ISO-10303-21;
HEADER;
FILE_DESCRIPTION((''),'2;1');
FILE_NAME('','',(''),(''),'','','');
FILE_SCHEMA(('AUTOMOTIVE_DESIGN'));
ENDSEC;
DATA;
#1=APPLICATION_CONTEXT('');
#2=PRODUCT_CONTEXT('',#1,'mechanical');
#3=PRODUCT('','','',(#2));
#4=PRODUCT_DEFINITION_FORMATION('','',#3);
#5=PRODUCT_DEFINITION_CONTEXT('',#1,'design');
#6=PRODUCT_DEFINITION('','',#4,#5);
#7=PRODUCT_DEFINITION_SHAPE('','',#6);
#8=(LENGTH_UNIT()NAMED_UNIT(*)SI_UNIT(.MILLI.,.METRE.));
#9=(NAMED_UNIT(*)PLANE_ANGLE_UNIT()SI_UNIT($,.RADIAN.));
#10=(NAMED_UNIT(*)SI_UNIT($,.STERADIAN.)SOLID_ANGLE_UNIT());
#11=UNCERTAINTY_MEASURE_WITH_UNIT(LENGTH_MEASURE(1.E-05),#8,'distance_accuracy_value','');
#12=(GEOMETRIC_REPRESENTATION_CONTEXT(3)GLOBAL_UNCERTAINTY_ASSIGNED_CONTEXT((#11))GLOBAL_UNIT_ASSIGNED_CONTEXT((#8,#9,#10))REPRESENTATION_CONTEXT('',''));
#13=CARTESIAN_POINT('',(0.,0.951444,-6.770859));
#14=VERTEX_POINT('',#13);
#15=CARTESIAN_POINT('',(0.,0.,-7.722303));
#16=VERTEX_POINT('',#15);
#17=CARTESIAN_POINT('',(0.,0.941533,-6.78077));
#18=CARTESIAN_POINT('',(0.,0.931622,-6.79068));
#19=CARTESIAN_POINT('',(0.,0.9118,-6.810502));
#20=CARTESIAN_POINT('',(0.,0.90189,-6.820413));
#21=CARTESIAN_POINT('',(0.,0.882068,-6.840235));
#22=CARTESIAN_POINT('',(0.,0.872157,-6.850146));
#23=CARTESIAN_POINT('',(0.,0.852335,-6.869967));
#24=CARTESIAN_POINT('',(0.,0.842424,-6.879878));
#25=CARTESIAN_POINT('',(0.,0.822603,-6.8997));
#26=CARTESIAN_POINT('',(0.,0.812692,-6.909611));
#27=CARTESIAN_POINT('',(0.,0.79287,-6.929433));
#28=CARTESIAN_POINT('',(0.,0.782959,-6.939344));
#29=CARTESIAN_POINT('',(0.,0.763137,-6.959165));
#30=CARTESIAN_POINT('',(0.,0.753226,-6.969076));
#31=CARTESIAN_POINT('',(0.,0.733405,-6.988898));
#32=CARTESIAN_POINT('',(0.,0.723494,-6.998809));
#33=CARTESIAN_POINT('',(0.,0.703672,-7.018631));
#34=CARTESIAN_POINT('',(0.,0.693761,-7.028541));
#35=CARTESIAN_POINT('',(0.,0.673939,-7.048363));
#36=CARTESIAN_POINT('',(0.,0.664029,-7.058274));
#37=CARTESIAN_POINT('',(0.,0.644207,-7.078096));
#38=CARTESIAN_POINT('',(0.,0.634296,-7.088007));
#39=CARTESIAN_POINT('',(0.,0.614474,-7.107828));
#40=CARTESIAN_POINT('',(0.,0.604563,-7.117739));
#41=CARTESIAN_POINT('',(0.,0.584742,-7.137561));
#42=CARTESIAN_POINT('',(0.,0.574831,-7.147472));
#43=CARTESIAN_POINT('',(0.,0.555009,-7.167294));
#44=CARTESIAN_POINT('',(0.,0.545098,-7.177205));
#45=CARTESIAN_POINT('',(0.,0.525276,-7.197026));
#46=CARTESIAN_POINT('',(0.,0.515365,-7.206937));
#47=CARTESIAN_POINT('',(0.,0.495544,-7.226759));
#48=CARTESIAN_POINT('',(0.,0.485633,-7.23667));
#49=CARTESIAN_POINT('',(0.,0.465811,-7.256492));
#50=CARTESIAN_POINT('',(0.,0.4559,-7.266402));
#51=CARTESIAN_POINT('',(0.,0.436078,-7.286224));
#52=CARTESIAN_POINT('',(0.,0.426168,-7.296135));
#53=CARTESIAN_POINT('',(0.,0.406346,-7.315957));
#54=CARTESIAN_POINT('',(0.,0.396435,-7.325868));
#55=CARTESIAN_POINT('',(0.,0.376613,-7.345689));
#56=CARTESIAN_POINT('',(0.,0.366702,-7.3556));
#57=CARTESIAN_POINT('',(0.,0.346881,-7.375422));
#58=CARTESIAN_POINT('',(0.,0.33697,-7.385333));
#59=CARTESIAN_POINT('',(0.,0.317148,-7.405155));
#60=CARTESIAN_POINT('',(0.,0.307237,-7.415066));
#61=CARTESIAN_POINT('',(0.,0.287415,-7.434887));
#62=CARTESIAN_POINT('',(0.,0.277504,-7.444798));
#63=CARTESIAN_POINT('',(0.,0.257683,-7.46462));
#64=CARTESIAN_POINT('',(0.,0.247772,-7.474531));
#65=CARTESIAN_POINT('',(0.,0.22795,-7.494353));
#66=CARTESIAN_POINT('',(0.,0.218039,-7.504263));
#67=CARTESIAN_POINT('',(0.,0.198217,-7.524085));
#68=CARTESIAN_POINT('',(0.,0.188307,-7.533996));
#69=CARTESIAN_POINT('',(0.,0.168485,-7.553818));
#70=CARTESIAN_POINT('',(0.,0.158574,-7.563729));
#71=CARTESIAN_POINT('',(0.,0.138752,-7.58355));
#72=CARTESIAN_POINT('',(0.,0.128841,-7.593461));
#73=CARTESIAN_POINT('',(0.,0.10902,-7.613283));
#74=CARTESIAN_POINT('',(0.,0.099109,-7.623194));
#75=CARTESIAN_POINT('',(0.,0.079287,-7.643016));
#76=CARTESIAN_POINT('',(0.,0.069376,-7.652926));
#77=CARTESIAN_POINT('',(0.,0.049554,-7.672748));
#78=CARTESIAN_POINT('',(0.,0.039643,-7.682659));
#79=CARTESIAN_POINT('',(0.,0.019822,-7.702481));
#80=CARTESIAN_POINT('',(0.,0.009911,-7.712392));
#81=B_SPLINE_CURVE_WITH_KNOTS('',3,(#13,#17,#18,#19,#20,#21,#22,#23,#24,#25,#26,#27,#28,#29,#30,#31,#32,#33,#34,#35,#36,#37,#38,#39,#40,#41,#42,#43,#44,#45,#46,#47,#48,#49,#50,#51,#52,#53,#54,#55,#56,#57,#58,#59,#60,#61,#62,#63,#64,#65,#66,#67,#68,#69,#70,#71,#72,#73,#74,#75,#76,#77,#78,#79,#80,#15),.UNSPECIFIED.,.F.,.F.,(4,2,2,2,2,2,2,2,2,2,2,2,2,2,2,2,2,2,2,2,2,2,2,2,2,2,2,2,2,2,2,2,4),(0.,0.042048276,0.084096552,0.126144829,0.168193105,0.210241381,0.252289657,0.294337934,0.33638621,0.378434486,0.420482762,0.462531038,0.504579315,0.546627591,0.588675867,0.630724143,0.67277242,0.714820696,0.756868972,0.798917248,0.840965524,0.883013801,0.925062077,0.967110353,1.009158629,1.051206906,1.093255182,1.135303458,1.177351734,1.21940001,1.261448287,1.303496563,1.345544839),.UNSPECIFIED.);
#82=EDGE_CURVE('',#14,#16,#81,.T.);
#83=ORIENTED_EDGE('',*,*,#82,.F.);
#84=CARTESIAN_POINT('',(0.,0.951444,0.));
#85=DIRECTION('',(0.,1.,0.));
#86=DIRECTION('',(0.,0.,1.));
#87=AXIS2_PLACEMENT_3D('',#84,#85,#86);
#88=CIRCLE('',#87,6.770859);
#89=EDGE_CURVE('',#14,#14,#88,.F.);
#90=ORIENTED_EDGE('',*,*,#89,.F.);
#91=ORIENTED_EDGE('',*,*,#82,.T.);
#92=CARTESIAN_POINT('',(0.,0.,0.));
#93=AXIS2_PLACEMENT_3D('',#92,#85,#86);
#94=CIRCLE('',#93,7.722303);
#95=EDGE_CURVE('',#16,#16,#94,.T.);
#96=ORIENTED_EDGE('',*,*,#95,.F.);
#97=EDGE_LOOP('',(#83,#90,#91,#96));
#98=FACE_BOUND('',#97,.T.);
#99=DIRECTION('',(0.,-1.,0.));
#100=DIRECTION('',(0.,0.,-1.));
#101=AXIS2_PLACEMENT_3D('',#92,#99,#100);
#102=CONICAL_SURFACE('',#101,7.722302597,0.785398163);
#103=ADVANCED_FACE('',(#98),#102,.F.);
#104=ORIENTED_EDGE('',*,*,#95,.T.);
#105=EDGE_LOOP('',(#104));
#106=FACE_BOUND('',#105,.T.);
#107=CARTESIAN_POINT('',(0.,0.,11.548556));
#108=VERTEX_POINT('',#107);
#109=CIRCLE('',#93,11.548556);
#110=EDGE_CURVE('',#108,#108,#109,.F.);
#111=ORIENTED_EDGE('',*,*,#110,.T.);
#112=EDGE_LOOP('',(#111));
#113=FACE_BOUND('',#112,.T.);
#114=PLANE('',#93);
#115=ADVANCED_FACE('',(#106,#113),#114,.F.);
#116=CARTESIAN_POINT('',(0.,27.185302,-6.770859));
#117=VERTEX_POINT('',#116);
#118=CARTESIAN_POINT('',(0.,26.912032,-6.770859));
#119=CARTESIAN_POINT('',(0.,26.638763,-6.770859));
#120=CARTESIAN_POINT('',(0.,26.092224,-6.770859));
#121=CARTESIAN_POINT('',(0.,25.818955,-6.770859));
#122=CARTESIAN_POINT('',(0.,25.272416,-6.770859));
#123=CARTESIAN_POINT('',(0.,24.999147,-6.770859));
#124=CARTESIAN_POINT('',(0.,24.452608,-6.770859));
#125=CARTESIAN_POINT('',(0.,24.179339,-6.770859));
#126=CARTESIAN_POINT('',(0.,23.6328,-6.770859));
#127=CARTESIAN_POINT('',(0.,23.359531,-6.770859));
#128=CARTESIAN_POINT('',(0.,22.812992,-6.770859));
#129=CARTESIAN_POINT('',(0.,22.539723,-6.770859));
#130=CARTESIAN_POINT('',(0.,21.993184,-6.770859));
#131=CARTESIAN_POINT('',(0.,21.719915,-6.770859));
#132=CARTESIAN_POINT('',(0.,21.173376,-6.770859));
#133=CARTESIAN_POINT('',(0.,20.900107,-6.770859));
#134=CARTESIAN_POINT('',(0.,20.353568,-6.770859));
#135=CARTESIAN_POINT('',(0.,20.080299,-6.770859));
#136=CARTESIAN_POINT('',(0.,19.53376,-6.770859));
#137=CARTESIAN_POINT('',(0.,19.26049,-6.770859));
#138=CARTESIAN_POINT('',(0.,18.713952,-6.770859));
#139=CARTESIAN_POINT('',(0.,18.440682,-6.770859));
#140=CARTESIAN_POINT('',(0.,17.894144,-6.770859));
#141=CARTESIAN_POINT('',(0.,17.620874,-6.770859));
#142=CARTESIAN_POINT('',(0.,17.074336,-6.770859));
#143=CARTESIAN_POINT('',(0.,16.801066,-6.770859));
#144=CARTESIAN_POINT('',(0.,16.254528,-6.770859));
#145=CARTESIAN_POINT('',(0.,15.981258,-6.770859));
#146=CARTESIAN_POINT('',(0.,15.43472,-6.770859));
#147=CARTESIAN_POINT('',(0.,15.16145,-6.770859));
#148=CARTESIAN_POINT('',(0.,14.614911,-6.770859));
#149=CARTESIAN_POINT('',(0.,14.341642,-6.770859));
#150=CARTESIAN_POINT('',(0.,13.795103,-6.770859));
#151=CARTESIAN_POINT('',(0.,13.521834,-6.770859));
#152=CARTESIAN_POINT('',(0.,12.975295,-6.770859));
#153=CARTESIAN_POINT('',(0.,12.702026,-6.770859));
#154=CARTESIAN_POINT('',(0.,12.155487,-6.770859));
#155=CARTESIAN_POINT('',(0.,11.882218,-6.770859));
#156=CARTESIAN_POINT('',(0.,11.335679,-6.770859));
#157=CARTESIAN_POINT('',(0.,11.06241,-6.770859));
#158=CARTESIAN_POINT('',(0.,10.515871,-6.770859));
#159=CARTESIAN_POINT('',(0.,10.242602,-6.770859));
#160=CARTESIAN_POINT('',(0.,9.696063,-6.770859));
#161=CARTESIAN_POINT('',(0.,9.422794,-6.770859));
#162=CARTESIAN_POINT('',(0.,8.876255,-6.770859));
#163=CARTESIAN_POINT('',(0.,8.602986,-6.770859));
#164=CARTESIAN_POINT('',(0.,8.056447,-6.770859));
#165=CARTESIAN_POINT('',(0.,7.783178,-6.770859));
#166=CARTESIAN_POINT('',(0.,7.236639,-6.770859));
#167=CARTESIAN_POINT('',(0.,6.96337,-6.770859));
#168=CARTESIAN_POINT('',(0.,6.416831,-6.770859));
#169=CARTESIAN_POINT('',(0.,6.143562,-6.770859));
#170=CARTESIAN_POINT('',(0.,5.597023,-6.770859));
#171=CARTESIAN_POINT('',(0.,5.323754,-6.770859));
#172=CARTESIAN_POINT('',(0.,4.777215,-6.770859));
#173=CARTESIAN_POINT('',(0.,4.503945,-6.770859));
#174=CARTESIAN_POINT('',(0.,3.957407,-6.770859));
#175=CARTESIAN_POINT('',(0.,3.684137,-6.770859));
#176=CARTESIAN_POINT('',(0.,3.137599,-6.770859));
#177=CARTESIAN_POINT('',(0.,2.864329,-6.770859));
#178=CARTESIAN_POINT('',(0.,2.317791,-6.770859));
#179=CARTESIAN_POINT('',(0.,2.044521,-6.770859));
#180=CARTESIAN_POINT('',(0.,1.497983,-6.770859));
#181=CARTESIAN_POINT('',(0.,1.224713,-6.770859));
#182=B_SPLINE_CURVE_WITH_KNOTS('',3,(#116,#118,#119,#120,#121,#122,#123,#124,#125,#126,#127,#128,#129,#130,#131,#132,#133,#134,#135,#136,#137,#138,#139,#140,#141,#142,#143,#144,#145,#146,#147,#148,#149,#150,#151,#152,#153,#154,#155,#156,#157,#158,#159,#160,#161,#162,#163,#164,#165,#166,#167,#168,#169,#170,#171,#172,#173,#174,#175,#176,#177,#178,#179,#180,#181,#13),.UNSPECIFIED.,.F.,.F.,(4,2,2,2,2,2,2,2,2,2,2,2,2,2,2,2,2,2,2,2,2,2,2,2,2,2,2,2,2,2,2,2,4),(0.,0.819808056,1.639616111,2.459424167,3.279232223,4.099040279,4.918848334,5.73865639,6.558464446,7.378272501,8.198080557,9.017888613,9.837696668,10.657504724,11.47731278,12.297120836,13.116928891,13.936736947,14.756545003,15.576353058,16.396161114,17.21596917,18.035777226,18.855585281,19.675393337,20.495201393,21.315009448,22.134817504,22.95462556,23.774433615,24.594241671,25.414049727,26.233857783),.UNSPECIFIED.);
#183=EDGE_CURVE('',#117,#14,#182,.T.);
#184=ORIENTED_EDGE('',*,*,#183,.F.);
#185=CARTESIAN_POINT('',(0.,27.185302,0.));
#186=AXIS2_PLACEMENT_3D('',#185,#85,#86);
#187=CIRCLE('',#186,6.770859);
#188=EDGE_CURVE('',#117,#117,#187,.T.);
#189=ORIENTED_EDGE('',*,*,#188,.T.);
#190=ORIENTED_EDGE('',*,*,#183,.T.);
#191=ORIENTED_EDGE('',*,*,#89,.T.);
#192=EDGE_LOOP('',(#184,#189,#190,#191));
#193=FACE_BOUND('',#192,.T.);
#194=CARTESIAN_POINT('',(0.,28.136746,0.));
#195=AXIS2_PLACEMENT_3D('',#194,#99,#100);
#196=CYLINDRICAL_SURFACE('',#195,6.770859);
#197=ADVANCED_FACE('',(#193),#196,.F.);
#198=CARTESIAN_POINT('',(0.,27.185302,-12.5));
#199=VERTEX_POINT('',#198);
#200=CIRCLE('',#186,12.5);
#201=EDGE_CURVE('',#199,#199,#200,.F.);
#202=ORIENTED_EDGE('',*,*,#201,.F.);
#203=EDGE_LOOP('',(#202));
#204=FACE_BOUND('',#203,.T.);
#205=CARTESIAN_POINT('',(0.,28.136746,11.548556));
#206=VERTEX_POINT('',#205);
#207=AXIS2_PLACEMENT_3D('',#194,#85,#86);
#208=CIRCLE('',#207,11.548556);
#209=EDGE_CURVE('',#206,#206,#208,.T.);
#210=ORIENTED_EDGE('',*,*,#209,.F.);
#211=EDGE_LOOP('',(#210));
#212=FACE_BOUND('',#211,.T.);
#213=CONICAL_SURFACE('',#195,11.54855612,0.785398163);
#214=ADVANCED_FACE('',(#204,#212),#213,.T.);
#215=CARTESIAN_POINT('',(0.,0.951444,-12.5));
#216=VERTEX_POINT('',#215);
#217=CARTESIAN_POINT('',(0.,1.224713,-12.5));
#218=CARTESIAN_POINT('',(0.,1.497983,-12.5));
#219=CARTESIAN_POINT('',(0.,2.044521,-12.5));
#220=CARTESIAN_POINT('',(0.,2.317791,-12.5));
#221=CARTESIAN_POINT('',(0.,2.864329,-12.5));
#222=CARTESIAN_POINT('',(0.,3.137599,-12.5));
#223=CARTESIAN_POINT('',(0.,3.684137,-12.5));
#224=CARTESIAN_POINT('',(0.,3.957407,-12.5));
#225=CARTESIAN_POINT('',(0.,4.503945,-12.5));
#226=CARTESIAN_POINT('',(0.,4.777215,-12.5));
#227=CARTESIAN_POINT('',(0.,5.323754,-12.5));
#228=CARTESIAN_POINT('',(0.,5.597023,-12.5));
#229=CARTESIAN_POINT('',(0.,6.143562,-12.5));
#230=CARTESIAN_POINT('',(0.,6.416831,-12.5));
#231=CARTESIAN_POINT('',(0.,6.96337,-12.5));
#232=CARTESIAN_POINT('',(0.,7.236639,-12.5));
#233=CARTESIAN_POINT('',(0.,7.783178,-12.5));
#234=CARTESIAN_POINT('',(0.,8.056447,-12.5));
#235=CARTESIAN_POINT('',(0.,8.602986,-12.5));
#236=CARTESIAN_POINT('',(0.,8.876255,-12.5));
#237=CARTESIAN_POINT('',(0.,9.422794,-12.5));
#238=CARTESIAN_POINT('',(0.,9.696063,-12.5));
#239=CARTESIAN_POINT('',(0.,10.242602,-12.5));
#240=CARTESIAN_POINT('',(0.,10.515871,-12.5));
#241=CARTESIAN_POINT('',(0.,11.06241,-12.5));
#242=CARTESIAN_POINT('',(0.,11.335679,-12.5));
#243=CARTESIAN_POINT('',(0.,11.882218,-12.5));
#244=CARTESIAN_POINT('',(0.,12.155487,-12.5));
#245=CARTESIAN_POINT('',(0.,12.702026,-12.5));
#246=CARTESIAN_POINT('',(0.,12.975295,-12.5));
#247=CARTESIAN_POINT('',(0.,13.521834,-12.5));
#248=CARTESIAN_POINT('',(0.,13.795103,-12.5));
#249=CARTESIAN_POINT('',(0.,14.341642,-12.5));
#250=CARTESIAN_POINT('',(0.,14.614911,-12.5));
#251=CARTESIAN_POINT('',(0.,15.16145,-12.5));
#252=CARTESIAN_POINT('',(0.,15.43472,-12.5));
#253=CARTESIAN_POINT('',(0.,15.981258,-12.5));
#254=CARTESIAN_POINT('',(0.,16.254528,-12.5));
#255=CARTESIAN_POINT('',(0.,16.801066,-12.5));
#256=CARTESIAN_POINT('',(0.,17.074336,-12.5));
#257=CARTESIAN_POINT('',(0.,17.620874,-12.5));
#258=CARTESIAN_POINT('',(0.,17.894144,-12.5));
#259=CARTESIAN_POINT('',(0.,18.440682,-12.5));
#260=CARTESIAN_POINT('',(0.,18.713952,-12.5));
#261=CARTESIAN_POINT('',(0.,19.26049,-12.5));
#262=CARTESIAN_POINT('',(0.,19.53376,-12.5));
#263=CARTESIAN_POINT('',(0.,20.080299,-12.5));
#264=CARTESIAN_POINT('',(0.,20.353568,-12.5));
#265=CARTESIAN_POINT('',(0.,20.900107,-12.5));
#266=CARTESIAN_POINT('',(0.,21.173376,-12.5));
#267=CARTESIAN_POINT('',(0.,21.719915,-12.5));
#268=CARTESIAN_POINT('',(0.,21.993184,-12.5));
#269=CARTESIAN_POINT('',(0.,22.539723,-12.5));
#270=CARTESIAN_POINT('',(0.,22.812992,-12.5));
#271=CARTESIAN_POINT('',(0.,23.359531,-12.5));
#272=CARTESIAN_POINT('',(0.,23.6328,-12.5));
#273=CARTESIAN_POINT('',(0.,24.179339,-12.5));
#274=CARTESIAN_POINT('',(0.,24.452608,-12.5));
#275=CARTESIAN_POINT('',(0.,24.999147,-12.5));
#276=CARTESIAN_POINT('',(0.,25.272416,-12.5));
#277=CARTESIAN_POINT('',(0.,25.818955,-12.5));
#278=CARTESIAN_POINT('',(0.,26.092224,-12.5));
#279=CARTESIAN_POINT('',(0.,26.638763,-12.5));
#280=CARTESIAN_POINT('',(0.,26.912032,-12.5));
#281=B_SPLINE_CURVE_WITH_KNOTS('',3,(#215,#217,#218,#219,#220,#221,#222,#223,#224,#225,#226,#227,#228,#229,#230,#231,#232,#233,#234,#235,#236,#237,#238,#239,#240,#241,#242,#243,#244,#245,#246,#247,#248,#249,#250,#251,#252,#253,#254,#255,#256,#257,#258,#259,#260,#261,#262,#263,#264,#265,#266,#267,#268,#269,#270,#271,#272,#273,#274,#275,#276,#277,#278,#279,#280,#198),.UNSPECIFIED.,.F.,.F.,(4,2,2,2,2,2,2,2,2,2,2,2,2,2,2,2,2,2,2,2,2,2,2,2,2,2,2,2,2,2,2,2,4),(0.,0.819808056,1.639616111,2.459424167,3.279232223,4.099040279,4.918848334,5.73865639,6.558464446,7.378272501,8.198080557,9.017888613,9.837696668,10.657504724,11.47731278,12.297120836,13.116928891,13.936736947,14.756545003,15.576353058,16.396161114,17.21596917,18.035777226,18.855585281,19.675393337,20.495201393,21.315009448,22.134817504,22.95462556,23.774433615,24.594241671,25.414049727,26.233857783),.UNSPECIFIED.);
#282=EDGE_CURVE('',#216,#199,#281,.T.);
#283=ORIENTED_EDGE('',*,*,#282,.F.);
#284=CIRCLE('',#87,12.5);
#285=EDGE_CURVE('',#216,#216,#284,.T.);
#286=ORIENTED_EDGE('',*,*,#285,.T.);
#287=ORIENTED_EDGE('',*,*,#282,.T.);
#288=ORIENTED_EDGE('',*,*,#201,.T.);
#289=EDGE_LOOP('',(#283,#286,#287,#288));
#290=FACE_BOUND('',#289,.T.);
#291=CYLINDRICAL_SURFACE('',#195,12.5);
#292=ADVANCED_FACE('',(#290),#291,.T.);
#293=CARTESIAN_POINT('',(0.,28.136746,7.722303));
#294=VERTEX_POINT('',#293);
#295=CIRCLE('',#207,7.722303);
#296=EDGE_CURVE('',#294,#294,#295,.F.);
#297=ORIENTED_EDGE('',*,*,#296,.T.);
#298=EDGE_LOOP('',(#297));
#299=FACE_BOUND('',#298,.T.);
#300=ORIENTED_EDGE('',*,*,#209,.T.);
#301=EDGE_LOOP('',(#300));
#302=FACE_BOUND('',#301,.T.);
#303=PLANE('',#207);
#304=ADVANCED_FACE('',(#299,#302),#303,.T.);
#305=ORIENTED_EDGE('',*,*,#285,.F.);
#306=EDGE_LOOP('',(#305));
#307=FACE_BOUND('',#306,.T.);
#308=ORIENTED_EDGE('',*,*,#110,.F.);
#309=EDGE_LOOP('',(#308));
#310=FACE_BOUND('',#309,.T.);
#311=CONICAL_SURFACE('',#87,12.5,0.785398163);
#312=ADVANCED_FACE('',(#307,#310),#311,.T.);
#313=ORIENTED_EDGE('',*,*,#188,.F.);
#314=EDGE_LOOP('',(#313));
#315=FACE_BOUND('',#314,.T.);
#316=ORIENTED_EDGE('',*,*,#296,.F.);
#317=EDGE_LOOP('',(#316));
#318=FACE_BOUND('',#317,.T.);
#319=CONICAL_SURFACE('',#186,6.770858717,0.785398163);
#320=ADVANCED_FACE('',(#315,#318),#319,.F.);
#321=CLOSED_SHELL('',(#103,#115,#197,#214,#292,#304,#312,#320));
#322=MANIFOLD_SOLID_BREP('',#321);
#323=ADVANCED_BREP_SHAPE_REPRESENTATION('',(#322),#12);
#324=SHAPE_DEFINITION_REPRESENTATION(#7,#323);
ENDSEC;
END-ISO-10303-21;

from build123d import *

# Parameters (mm, degrees)
SKETCH1_R           = 12.5
BOSS_EXTRUDE1_DEPTH = 28.136745543
SKETCH2_R           = 6.770858717
CUT_EXTRUDE1_DEPTH  = 34.229150602
CHAMFER1_SIZE       = 0.95144388


with BuildPart() as part:
    # Sketch1 → Boss-Extrude1 (new body)
    with BuildSketch(Plane(origin=(0, 0, 0), x_dir=(1, 0, 0), z_dir=(0, 1, 0))):
        Circle(SKETCH1_R)
    extrude(amount=BOSS_EXTRUDE1_DEPTH)

    # Sketch2 → Cut-Extrude1 (cut, through all)
    with BuildSketch(Plane(origin=(0, 0, 0), x_dir=(1, 0, 0), z_dir=(0, 1, 0))):
        Circle(SKETCH2_R)
    extrude(amount=CUT_EXTRUDE1_DEPTH, mode=Mode.SUBTRACT)

    # Chamfer1
    chamfer1_edges = [part.edges().sort_by_distance(p)[0] for p in [
        (-6.770858717, 28.136745543, 0),
        (-6.770858717, 0, 0),
        (-12.5, 0, 0),
        (-12.5, 28.136745543, 0),
    ]]
    chamfer(chamfer1_edges, length=CHAMFER1_SIZE)


solid = part.part
